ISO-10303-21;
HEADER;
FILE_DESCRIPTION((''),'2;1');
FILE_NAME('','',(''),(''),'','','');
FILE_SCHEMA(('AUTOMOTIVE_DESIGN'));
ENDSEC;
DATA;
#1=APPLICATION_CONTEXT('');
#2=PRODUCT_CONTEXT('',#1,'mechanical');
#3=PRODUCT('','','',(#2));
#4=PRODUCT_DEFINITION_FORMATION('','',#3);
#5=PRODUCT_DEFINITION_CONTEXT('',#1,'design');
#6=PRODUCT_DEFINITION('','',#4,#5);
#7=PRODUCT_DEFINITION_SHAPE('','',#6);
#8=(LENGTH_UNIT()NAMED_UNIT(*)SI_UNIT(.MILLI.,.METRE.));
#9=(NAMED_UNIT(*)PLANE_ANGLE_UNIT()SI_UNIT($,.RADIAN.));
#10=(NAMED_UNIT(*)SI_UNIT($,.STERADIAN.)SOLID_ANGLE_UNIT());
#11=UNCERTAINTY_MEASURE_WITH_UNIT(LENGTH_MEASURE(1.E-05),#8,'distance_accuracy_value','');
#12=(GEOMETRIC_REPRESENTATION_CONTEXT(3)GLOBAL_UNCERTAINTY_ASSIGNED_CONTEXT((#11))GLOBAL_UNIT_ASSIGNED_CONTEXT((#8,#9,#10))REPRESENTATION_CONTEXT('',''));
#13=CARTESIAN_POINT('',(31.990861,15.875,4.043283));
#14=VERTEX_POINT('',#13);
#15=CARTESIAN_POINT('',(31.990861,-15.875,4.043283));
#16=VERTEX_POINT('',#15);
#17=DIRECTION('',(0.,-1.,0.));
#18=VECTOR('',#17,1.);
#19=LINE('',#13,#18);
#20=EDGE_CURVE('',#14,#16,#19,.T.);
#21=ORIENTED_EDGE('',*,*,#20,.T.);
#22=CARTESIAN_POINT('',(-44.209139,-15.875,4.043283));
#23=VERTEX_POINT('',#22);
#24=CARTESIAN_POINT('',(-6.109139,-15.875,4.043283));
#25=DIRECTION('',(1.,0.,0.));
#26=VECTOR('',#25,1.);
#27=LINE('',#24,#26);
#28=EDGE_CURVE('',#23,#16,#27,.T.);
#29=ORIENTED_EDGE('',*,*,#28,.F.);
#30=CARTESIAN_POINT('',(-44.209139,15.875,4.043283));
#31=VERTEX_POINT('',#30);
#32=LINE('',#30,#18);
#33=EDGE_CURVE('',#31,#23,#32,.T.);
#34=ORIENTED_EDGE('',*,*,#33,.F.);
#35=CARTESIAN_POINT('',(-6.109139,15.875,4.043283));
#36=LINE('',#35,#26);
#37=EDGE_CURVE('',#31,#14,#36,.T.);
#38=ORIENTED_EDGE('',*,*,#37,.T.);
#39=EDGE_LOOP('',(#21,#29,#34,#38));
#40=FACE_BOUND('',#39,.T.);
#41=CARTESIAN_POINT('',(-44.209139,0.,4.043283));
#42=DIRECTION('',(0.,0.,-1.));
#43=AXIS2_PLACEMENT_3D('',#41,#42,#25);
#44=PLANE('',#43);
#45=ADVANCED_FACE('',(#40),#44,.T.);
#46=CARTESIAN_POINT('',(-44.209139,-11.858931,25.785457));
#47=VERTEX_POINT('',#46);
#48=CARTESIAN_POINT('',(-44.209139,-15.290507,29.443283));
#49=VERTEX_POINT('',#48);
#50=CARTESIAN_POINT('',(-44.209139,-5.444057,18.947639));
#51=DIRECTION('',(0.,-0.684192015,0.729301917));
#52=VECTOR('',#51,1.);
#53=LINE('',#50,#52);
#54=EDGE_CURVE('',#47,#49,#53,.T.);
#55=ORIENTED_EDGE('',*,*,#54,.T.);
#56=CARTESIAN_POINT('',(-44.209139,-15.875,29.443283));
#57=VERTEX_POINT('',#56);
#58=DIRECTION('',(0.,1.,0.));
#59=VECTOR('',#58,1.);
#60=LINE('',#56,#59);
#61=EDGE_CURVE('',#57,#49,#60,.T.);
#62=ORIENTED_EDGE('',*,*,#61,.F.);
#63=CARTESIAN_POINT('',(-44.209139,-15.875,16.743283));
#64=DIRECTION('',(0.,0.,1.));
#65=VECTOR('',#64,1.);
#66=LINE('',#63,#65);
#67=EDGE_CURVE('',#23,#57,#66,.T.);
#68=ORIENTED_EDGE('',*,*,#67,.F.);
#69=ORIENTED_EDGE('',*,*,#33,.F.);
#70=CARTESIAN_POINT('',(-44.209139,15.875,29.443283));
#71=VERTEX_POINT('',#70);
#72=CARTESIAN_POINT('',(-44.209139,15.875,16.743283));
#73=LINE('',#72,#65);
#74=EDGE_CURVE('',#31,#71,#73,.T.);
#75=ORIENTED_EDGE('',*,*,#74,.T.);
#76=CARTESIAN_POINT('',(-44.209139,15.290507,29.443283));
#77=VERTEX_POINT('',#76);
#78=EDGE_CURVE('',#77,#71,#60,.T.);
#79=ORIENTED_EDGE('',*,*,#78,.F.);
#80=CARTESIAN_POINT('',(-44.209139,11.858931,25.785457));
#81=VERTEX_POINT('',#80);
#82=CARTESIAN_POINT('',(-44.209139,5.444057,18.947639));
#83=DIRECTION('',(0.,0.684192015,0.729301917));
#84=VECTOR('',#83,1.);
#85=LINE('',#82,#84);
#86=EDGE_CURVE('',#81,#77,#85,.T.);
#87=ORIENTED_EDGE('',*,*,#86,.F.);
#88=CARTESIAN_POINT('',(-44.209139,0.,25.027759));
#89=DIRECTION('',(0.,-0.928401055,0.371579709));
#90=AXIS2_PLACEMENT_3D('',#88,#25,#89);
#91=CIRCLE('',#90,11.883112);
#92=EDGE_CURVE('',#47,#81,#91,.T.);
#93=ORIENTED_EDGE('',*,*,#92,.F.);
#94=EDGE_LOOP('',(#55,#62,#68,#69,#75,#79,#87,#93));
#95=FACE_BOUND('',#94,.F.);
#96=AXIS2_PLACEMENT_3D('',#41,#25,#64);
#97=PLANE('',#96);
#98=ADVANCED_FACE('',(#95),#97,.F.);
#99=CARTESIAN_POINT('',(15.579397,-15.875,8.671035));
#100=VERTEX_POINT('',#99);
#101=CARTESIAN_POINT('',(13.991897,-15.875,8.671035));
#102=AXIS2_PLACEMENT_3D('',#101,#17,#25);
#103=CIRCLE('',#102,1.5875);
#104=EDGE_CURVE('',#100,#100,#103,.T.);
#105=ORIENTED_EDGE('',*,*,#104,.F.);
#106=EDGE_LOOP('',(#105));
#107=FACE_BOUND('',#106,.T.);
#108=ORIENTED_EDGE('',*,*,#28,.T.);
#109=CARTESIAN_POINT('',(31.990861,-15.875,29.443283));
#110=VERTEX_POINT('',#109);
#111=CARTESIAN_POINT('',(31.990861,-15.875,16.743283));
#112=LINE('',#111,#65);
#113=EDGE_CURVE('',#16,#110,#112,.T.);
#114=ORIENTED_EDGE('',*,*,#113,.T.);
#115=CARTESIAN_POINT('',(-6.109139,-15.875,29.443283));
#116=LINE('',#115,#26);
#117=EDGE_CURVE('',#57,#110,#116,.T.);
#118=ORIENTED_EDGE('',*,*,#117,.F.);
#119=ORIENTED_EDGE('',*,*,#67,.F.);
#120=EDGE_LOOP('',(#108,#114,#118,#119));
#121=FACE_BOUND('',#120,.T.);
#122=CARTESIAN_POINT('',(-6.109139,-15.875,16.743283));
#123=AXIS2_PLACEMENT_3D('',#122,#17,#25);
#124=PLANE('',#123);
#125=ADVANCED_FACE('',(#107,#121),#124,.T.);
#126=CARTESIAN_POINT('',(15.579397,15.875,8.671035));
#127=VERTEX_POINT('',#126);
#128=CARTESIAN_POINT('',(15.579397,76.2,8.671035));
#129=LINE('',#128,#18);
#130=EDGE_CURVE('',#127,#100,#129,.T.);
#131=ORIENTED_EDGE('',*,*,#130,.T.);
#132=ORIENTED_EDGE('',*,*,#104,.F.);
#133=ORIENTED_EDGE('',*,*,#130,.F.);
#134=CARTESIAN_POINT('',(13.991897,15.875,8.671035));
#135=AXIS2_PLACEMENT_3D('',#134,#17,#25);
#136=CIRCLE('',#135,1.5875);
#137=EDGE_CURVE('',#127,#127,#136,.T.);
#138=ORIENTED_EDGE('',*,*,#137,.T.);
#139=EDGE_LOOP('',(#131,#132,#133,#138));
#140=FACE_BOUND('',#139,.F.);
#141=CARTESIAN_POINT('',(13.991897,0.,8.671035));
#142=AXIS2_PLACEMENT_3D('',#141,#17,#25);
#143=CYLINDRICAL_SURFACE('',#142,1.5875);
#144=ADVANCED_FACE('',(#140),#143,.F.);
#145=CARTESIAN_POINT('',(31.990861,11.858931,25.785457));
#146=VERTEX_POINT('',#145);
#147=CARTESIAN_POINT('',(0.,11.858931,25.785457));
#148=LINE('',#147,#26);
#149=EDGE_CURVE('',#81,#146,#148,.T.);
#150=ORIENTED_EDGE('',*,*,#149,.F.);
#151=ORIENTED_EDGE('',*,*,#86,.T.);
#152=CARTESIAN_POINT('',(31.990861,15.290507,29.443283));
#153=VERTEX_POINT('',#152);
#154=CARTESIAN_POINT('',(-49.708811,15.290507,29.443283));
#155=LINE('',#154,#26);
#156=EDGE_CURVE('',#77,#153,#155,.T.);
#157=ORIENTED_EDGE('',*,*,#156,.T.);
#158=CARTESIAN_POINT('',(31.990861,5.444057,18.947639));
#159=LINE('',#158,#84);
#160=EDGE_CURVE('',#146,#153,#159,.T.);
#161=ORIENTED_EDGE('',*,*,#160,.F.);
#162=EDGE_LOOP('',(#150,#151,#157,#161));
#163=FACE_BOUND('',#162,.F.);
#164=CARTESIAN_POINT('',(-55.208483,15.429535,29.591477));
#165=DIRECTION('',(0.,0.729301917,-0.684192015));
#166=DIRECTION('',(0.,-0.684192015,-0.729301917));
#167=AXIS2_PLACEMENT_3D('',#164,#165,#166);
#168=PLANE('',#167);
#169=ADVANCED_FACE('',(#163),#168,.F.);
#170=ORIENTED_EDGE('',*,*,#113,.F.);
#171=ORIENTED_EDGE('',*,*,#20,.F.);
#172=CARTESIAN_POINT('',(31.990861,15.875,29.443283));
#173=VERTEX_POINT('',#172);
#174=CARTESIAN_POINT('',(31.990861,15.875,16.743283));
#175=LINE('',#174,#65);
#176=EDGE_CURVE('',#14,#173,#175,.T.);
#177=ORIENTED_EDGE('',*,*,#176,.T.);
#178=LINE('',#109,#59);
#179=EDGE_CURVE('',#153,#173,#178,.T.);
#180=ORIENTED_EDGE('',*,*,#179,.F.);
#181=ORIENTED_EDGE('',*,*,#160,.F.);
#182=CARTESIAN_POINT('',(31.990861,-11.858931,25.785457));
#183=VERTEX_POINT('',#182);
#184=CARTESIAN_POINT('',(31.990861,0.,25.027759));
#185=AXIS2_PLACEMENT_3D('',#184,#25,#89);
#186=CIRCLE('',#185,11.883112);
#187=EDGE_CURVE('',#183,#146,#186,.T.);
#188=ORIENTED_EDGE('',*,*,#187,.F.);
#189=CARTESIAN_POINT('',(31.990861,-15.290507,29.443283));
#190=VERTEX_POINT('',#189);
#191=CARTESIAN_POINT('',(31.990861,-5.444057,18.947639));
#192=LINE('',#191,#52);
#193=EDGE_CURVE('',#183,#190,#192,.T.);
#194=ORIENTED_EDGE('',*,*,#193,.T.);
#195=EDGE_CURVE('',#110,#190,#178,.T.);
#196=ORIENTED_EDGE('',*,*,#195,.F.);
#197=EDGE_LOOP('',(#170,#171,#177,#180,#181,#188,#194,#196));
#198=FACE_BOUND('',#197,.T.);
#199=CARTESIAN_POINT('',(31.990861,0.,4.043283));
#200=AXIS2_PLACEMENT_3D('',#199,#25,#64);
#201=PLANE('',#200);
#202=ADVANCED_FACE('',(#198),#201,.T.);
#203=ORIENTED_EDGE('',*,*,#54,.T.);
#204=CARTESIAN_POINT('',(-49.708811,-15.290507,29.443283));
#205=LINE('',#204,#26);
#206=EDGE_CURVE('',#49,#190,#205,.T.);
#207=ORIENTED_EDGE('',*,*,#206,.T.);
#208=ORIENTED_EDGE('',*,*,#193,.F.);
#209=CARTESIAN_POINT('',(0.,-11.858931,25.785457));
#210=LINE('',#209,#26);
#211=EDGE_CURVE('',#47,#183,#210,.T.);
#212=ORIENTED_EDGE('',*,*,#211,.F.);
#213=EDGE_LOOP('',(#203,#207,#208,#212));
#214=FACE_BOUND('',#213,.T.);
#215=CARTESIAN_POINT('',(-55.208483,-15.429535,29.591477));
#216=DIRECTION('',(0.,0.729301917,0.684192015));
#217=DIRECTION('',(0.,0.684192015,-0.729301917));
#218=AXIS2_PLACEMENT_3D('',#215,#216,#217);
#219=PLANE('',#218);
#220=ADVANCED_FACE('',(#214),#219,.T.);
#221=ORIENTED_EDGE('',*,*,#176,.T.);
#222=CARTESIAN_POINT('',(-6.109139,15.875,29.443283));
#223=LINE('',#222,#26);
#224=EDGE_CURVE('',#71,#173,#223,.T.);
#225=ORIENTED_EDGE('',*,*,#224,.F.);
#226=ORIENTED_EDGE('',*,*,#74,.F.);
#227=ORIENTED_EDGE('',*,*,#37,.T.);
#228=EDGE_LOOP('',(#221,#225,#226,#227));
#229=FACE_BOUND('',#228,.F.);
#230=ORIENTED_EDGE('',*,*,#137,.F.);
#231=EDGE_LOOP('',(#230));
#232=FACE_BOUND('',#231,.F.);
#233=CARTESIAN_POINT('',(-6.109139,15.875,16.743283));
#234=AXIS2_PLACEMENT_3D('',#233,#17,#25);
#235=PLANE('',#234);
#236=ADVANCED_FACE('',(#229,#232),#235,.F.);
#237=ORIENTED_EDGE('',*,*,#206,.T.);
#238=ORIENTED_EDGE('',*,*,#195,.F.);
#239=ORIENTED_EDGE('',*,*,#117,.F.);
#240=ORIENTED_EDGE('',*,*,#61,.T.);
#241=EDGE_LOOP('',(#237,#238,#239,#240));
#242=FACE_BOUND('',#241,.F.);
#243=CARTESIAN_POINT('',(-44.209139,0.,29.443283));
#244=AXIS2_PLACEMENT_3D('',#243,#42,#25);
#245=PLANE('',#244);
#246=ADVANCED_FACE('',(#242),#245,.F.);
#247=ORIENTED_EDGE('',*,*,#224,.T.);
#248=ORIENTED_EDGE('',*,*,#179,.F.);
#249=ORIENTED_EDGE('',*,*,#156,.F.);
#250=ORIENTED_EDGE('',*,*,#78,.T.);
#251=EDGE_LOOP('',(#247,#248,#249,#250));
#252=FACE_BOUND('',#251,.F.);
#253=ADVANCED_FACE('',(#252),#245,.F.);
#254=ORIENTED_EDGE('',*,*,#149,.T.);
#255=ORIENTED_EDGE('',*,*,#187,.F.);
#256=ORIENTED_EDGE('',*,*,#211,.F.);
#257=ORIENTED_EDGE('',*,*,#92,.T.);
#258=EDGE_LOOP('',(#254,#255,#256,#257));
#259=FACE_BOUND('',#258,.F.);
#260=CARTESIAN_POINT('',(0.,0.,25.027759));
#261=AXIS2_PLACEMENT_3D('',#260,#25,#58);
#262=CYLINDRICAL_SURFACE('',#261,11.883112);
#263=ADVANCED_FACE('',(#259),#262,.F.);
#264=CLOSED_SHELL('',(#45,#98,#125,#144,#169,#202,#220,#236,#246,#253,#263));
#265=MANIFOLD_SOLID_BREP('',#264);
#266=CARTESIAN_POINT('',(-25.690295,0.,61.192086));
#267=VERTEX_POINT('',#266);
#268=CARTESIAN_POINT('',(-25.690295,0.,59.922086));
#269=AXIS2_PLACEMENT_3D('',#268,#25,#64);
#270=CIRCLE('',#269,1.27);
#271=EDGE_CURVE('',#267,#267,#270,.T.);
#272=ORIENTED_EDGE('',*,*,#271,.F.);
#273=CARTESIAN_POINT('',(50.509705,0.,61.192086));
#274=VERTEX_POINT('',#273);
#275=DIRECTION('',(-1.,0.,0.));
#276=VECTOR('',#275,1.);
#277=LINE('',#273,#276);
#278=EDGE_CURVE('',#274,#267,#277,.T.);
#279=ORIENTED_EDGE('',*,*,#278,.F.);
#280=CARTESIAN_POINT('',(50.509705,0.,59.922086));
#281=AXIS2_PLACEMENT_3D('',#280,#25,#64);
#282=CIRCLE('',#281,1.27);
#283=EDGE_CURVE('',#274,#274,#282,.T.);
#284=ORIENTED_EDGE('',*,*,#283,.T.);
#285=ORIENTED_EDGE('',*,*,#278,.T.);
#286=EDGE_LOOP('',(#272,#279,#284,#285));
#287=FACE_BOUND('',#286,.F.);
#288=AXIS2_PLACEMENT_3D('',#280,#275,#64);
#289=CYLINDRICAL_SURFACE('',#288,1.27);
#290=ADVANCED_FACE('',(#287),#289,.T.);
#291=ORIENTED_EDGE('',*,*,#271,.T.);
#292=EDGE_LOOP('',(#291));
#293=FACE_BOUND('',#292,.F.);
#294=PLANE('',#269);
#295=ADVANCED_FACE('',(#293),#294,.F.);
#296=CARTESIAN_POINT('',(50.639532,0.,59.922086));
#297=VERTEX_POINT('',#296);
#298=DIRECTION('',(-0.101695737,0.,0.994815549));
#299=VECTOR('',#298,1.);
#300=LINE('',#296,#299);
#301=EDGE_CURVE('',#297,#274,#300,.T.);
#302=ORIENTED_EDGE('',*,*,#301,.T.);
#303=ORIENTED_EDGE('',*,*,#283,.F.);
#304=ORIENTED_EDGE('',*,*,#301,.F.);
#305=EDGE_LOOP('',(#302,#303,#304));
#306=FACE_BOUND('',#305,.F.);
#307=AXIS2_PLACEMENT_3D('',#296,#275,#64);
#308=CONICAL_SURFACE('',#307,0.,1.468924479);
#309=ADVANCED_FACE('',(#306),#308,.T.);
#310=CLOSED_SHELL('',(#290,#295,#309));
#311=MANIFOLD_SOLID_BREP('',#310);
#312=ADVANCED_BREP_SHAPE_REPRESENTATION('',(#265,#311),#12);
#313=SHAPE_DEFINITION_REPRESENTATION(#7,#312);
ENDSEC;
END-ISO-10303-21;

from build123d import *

# Parameters (mm, degrees)
F0_W        = 76.2
F0_H        = 25.4
F1_DEPTH    = 15.875
F2_R        = 11.8831121617
F3_DEPTH    = 76.2
F4_T1_DEPTH = 98.1986886944
F5_R        = 1.5875
F6_DEPTH    = 76.2


# Not quite as in the source:
# - a fillet or chamfer that OpenCascade refuses, or shapes differently, is made with other operations: its cross-section is extruded or revolved along the edge and cut away or added


with BuildPart() as f1:
    # F0 (on Front) → F1 (new body, symmetric)
    with BuildSketch(Plane.XZ):
        with Locations((-6.1091389507, 16.743282738)):
            Rectangle(F0_W, F0_H)
    extrude(amount=F1_DEPTH, both=True)

    # F2 (on Right) → F3 (cut, symmetric)
    with BuildSketch(Plane.YZ):
        with Locations((0, 25.0277593732)):
            Circle(F2_R)
    extrude(amount=F3_DEPTH, both=True, mode=Mode.SUBTRACT)

    # F4: chamfer of 5.08 on 2 edges, made by hand

    # F4_s2 → F4_t1 (cut)
    with BuildSketch(Plane.YZ.offset(-55.2084832979)):
        with BuildLine():
            Line((15.4295351274, 29.5914768875), (11.7199033612, 25.6372630168))
            Line((11.7199033612, 25.6372630168), (11.6185101073, 25.6307847395))
            ThreePointArc((11.6185101073, 25.6307847395), (11.5042711471, 27.5685809315), (10.937968324, 29.4055302395))
            Line((10.937968324, 29.4055302395), (11.0322938713, 29.544882738))
            ThreePointArc((11.0322938713, 29.544882738), (13.2309144993, 29.544882738), (15.4295351274, 29.6930768875))
            Line((15.4295351274, 29.6930768875), (15.4295351274, 29.5914768875))
        make_face()
        with BuildLine():
            Line((-15.4295351274, 29.5914768875), (-11.7199033612, 25.6372630168))
            Line((-11.7199033612, 25.6372630168), (-11.6185101073, 25.6307847395))
            ThreePointArc((-11.6185101073, 25.6307847395), (-11.5042711471, 27.5685809315), (-10.937968324, 29.4055302395))
            Line((-10.937968324, 29.4055302395), (-11.0322938713, 29.544882738))
            ThreePointArc((-11.0322938713, 29.544882738), (-13.2309144993, 29.544882738), (-15.4295351274, 29.6930768875))
            Line((-15.4295351274, 29.6930768875), (-15.4295351274, 29.5914768875))
        make_face()
    extrude(amount=F4_T1_DEPTH, mode=Mode.SUBTRACT)

    # F5 (on Front) → F6 (cut, symmetric)
    with BuildSketch(Plane.XZ):
        with Locations((13.9918969944, 8.6710350588)):
            Circle(F5_R)
    extrude(amount=F6_DEPTH, both=True, mode=Mode.SUBTRACT)


with BuildPart() as f8:
    # F7 (on Front) → F8 (revolve)
    with BuildSketch(Plane.XZ):
        Polygon((50.6395318134, 59.9220860207), (50.5097051469, 61.1920860207), (-25.6902948531, 61.1920860207), (-25.6902948531, 59.9220860207), align=None)
    revolve(axis=Axis((12.4746184802, 0, 59.9220860207), (1, 0, 0)))


solid = Compound([f1.part, f8.part])
